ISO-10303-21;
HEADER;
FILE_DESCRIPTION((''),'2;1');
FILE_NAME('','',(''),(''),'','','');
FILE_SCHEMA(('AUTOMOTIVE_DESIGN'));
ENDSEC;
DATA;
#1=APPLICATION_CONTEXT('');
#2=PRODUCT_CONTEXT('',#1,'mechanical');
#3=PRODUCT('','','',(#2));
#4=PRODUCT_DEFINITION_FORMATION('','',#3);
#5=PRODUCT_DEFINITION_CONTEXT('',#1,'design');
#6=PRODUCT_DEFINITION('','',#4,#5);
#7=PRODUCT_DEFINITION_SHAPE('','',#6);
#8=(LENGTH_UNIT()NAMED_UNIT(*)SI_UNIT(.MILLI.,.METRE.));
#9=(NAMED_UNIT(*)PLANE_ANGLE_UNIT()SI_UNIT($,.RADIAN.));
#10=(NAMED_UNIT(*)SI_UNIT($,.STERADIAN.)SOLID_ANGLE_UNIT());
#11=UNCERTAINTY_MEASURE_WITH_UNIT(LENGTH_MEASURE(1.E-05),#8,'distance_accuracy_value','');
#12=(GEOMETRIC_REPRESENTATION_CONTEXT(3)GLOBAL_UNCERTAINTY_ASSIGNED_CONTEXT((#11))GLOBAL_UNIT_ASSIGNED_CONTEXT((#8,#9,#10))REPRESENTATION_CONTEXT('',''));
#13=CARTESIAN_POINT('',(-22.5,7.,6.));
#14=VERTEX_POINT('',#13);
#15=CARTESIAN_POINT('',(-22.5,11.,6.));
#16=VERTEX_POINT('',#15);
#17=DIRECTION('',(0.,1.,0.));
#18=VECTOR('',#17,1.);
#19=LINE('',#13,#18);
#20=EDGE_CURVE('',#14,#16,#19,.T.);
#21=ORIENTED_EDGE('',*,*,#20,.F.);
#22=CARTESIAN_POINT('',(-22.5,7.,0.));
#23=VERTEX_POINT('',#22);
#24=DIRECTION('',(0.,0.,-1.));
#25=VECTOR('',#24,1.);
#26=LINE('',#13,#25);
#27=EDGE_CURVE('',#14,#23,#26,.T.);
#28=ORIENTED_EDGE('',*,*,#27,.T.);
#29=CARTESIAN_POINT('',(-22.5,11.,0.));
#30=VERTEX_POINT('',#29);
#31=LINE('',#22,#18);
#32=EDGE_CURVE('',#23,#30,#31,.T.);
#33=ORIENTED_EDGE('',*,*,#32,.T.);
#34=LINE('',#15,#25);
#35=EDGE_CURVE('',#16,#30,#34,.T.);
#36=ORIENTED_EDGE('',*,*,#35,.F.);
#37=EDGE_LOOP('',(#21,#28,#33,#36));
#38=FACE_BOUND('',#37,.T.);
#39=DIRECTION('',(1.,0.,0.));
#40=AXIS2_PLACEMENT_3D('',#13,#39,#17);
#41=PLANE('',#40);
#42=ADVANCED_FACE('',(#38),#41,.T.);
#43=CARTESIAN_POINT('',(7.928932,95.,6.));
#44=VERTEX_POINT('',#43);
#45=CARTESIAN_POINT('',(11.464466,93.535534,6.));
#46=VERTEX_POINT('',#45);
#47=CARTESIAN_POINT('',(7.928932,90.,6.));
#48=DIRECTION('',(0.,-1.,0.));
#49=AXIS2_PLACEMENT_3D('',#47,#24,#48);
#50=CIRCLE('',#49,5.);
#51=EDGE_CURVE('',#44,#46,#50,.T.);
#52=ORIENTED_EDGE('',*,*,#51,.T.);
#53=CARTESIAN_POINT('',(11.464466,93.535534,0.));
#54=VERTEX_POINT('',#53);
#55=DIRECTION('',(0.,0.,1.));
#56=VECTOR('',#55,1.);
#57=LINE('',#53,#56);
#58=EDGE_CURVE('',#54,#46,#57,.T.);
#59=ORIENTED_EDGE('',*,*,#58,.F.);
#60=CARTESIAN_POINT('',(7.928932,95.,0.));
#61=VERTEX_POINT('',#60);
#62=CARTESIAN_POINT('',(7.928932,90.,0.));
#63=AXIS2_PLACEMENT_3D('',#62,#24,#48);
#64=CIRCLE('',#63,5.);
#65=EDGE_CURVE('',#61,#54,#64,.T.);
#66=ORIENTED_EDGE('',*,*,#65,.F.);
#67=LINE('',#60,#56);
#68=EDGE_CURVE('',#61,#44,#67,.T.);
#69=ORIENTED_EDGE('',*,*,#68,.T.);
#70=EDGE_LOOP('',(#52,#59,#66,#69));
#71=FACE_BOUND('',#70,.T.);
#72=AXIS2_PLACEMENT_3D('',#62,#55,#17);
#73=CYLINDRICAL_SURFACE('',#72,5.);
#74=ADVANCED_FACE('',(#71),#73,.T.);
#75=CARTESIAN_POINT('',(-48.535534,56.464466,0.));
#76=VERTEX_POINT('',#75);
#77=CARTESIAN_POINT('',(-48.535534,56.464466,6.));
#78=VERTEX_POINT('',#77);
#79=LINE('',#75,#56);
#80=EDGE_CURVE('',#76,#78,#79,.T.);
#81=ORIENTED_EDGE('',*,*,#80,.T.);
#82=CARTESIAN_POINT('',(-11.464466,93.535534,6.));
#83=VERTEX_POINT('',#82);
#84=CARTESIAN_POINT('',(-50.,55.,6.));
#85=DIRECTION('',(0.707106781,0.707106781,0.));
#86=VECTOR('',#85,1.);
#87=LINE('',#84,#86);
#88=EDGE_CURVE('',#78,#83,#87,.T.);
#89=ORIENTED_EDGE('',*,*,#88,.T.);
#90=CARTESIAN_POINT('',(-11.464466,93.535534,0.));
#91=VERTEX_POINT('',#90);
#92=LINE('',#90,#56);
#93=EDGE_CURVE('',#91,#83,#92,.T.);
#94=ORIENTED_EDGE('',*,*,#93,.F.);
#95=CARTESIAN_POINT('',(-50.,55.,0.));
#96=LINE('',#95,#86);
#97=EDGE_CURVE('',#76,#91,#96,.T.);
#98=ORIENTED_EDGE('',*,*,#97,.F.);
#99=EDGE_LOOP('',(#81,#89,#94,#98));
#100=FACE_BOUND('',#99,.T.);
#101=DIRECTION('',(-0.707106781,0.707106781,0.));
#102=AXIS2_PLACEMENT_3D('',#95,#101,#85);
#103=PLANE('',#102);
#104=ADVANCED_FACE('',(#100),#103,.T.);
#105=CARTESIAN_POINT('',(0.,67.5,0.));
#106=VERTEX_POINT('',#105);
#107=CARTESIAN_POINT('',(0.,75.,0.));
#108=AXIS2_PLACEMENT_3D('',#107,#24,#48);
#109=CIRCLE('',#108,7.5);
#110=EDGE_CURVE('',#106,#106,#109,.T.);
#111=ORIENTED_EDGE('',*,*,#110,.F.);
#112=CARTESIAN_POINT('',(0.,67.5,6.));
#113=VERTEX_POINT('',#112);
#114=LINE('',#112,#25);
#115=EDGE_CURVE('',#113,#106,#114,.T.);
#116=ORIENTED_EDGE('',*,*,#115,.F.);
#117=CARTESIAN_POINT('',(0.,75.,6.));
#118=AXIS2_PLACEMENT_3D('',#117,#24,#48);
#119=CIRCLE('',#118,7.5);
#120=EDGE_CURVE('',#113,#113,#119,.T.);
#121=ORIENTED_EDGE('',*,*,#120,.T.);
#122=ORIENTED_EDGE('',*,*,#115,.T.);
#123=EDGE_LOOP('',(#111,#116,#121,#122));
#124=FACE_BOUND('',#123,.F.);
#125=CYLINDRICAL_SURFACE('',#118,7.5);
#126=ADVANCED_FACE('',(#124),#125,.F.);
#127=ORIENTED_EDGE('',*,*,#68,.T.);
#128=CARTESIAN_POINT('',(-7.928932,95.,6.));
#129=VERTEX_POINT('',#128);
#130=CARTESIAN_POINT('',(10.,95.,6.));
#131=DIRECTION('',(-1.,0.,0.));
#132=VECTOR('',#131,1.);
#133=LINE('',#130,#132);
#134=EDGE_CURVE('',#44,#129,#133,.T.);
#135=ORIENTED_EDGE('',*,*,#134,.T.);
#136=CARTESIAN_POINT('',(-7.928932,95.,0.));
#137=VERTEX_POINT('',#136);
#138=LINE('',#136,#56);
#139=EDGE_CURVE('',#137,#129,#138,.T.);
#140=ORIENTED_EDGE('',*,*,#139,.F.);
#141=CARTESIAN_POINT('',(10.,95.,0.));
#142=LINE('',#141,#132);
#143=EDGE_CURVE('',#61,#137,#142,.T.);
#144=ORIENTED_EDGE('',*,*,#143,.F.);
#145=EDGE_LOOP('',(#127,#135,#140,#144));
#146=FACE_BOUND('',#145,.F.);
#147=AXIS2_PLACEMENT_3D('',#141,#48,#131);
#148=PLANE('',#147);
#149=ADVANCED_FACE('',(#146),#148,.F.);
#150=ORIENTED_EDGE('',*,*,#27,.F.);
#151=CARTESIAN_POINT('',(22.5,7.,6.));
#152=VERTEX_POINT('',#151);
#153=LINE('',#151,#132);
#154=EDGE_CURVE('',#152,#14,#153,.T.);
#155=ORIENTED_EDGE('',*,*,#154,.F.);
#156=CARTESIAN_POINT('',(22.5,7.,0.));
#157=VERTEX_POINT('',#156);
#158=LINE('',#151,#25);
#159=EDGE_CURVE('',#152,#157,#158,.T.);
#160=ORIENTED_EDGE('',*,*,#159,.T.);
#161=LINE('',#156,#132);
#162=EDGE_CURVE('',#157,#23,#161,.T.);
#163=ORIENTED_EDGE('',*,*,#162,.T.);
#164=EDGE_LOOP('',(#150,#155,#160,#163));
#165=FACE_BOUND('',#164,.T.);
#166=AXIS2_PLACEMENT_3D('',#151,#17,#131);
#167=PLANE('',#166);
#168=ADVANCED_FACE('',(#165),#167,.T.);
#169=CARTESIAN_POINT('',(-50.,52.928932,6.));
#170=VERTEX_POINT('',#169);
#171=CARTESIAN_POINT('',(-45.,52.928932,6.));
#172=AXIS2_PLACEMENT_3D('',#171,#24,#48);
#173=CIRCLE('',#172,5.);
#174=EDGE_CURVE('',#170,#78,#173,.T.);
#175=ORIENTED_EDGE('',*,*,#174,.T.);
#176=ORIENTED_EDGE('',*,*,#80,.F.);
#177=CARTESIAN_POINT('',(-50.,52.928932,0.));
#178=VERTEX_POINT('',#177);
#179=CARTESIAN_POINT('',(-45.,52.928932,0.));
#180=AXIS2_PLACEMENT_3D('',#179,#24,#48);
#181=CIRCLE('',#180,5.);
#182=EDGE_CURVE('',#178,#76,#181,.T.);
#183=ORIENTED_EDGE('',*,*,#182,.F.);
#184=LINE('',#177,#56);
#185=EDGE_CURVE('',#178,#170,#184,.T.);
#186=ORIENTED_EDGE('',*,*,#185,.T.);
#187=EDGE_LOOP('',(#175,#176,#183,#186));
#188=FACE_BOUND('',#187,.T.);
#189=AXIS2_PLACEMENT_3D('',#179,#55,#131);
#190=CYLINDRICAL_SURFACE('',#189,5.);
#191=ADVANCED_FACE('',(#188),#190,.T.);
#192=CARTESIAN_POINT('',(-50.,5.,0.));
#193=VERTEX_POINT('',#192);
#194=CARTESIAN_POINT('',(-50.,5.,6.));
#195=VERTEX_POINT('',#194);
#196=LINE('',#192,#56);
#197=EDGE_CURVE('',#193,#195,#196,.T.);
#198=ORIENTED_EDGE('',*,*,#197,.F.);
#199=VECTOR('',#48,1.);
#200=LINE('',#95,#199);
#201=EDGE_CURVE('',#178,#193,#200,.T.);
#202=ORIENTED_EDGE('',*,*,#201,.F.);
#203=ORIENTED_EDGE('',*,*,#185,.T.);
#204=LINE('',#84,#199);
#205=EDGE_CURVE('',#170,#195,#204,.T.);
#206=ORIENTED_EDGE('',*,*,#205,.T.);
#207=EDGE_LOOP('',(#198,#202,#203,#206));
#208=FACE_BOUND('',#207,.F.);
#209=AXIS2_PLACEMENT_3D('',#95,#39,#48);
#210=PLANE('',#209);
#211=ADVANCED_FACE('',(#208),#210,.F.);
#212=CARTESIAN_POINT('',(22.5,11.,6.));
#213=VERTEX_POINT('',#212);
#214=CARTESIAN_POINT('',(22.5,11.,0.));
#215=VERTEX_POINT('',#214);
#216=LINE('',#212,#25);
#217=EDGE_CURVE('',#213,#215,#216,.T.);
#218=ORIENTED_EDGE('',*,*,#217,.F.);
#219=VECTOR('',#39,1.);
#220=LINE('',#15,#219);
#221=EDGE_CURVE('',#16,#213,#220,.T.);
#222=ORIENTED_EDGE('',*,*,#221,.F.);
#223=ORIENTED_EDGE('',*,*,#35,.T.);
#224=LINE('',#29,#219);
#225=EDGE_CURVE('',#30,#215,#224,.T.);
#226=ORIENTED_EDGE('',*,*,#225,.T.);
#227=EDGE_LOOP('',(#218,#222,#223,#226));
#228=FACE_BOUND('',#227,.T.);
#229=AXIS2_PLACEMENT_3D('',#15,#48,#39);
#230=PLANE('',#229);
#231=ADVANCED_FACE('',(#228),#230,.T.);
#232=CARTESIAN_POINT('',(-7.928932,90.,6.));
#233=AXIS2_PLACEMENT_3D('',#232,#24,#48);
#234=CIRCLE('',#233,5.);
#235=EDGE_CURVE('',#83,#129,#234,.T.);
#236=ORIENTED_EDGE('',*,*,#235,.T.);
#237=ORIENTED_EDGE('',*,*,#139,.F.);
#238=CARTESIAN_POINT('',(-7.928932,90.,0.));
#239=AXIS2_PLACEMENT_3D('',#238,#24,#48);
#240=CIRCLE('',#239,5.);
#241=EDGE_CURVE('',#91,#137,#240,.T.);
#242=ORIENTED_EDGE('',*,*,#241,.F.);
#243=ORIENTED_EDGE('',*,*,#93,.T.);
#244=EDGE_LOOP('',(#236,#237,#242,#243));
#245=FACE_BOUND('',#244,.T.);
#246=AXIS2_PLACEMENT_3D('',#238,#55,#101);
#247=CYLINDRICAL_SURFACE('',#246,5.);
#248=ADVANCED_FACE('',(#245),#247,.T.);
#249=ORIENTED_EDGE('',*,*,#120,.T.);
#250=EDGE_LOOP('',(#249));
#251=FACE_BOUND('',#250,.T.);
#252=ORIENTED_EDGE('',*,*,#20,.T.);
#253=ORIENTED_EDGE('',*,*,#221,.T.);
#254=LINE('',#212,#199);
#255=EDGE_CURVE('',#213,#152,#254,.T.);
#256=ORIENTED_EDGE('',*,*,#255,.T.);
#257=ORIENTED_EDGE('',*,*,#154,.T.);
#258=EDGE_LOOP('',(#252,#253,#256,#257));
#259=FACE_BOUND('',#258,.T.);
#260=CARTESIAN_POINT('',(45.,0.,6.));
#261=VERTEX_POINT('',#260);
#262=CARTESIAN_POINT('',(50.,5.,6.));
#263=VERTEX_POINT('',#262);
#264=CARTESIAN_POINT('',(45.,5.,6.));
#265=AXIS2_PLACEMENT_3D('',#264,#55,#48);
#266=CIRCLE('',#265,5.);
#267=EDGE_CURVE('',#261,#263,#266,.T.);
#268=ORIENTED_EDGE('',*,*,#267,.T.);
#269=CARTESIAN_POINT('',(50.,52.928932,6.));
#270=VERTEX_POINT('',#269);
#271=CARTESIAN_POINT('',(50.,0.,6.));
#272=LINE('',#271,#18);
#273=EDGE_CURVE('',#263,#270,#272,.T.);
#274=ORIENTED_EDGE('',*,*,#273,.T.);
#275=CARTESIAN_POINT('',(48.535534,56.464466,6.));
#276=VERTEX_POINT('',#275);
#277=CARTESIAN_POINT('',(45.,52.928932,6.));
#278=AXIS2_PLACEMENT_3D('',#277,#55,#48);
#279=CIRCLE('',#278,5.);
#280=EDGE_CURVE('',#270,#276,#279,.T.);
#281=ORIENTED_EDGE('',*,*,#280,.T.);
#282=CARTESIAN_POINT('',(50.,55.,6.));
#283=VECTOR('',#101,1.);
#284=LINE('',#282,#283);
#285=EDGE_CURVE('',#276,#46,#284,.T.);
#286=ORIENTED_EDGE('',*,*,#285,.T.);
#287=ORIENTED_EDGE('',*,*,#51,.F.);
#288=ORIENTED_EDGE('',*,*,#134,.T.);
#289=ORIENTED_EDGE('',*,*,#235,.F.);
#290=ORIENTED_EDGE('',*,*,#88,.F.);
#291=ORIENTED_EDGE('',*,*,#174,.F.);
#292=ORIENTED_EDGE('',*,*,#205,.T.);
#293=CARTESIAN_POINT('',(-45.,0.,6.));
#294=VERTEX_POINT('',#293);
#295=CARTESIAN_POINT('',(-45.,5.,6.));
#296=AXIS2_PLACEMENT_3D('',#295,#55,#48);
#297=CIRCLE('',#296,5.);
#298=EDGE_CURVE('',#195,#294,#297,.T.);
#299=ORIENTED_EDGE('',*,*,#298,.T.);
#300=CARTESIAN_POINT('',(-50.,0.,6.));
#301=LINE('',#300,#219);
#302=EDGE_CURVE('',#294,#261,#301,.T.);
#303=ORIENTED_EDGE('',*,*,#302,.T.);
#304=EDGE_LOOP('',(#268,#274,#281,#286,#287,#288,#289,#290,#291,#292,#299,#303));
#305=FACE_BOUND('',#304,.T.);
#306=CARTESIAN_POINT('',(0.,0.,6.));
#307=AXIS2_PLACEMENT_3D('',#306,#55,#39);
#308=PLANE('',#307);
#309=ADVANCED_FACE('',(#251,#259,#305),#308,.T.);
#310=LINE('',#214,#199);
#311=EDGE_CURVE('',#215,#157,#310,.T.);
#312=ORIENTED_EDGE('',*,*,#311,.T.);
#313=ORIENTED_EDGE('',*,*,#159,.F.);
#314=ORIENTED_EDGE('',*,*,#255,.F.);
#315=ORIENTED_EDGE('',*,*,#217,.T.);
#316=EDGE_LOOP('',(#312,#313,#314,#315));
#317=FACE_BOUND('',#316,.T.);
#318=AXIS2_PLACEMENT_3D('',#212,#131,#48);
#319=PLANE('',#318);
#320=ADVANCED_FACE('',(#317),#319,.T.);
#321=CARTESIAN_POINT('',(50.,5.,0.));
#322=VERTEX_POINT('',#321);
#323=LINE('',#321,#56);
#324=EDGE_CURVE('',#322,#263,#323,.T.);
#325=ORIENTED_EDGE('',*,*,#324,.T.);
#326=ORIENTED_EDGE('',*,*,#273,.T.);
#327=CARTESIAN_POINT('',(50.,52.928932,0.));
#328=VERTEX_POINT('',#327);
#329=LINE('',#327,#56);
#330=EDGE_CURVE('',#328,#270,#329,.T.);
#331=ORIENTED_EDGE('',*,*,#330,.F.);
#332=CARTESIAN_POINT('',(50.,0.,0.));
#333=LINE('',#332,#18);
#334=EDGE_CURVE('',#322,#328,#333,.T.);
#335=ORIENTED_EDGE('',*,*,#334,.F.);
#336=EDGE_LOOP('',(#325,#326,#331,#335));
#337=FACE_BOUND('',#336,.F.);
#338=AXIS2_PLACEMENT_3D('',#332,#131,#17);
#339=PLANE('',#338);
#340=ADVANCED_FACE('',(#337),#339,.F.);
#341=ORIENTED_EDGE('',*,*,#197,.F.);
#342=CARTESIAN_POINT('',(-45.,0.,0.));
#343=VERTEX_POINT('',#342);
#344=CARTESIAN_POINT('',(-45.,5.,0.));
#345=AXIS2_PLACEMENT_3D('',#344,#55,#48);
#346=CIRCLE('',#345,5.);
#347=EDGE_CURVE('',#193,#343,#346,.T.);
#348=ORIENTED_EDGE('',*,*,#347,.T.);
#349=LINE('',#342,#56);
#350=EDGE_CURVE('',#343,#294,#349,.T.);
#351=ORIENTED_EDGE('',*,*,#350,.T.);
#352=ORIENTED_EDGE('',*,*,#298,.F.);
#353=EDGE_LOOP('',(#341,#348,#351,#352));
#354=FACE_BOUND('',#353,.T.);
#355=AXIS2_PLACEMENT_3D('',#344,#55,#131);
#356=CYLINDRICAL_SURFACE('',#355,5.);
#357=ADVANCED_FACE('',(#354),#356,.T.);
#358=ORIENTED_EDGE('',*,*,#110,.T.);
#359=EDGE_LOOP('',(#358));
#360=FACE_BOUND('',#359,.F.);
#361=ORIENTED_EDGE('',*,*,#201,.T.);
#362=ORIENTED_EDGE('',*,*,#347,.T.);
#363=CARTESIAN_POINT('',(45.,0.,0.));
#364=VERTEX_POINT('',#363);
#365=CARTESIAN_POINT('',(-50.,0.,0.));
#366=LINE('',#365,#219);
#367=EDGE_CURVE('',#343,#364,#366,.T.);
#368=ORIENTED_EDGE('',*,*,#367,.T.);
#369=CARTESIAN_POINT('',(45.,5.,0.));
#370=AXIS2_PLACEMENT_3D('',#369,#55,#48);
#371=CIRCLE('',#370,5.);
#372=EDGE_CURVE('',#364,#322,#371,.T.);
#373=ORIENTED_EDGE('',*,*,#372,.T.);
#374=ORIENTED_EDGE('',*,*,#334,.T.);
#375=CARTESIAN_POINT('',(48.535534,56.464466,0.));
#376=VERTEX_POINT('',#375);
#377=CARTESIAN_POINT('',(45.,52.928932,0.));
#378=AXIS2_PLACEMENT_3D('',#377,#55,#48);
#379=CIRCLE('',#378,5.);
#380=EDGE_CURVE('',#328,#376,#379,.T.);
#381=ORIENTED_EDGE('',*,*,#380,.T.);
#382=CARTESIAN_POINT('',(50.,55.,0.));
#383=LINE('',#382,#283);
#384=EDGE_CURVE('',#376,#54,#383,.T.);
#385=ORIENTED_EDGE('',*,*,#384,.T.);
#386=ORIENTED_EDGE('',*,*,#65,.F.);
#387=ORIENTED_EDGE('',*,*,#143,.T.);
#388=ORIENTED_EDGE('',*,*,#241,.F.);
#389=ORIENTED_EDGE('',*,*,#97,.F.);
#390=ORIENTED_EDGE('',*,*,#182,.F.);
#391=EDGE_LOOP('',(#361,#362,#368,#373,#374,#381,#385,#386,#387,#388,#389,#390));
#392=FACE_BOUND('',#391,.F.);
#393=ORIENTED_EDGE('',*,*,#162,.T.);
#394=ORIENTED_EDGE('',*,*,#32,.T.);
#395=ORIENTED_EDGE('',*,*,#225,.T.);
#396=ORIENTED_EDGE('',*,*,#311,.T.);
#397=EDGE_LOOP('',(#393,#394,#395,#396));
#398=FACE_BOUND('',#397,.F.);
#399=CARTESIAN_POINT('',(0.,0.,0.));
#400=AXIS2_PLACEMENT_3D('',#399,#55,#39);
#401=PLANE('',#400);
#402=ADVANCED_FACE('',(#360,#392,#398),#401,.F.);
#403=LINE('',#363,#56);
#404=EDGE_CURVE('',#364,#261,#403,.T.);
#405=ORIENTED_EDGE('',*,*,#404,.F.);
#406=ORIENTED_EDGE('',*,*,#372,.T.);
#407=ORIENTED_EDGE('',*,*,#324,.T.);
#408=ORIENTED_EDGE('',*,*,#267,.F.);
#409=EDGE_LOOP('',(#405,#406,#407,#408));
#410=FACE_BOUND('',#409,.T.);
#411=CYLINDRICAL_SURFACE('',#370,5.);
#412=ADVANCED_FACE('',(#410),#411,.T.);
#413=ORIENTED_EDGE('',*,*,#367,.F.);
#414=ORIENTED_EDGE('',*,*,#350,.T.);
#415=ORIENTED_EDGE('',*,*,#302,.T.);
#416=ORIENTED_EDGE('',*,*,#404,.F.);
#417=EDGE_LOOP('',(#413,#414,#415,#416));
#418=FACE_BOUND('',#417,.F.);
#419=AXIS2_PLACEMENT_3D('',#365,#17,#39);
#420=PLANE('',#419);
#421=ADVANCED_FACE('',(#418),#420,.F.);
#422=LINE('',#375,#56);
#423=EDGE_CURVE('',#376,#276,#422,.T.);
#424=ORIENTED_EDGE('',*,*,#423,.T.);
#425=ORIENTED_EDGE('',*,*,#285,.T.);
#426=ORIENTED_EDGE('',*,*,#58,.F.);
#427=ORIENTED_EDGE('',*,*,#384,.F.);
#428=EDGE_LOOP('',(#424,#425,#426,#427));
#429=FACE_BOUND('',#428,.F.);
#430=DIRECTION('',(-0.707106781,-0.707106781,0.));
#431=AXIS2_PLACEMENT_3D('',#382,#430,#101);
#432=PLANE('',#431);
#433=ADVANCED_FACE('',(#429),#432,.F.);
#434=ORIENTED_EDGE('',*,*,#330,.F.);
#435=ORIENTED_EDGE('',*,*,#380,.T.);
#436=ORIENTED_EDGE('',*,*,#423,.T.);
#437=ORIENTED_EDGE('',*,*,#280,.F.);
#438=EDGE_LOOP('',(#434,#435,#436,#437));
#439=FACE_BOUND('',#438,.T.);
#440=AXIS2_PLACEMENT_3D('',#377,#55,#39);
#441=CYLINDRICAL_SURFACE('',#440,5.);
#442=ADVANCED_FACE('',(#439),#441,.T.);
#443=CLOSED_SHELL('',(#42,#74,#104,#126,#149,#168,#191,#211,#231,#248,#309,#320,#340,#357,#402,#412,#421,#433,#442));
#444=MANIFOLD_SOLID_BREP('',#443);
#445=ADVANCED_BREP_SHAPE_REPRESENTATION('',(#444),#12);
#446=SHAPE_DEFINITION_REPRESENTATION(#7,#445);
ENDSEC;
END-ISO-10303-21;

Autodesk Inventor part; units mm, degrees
ref_plane "YZ Plane" through (0, 0, 0) normal (1, 0, 0) x (0, 1, 0)
ref_plane "XZ Plane" through (0, 0, 0) normal (0, 1, 0) x (-1, 0, 0)
sketch "Sketch1" plane through (0, 0, 0) normal (0, 0, 1) x (1, 0, 0)
  line L0 (-50, 0) -> (50, 0)
  line L1 (50, 0) -> (50, 55)
  line L2 (10, 95) -> (-10, 95)
  line L3 (-50, 55) -> (-50, 0)
  line L4 (-50, 55) -> (-10, 95)
  line L5 (50, 55) -> (10, 95)
  point P0 (0, 0)
  point P1 (50, 95)
  point P2 (-50, 95)
  point P3 (0, 0)
  dimension "d2" = 95
  dimension "d3" = 100
  dimension "d4" = 40
  dimension "d5" = 40
  dimension "d6" = 40
  dimension "d7" = 40
extrude "Plate1" add sketch "Sketch1" along normal blind 6
hole "Hole1" at (0, 75, 6) direction (0, 0, -1) diameter 15 depth 6 tip angle 118
fillet "Corner Round1" radius 5 6 edges at (-50, 0, 3) (50, 0, 3) (50, 55, 3) (10, 95, 3) (-10, 95, 3) (-50, 55, 3)
ref_plane "Work Plane1" through (0, 0, 6) normal (1, 0, 0) x (0, 0, -1)
sketch "Sketch2" plane through (-45, 0, 6) normal (0, 0, 1) x (1, 0, 0)
  circle A0 centre (45, 75) radius 7.5 projected
  line L0 (22.5, 11) -> (67.5, 11)
  line L1 (67.5, 11) -> (67.5, 7)
  line L2 (67.5, 7) -> (22.5, 7)
  line L3 (22.5, 7) -> (22.5, 11)
  point P0 (0, 0)
  dimension "d19" = 4
  dimension "d20" = 45
  dimension "d21" = 7
  dimension "d22" = 22.5
extrude "Cut1" cut sketch "Sketch2" against normal blind 6 contours L0 L1 L2 L3
equation "\"d16\" = Thickness"
equation "\"d23\" = Thickness"
equation "\"d5\" = d4"
equation "\"d6\" = d4"
equation "\"d7\" = d6"
equation "\"BendReliefWidth\" = Thickness"
equation "\"CornerReliefSize\" = 4 * Thickness"
equation "\"MinimumRemnant\" = 2 * Thickness"
equation "\"TransitionRadius\" = BendRadius"
equation "\"d8\" = BendRadius"
equation "\"JacobiRadiusSize\" = Thickness"
equation "\"GapSize\" = Thickness"
equation "\"Thickness\" = 6"
equation "\"BendRadius\" = 0.001"
properties part number "voetplaat poot" material "Steel, Mild"
